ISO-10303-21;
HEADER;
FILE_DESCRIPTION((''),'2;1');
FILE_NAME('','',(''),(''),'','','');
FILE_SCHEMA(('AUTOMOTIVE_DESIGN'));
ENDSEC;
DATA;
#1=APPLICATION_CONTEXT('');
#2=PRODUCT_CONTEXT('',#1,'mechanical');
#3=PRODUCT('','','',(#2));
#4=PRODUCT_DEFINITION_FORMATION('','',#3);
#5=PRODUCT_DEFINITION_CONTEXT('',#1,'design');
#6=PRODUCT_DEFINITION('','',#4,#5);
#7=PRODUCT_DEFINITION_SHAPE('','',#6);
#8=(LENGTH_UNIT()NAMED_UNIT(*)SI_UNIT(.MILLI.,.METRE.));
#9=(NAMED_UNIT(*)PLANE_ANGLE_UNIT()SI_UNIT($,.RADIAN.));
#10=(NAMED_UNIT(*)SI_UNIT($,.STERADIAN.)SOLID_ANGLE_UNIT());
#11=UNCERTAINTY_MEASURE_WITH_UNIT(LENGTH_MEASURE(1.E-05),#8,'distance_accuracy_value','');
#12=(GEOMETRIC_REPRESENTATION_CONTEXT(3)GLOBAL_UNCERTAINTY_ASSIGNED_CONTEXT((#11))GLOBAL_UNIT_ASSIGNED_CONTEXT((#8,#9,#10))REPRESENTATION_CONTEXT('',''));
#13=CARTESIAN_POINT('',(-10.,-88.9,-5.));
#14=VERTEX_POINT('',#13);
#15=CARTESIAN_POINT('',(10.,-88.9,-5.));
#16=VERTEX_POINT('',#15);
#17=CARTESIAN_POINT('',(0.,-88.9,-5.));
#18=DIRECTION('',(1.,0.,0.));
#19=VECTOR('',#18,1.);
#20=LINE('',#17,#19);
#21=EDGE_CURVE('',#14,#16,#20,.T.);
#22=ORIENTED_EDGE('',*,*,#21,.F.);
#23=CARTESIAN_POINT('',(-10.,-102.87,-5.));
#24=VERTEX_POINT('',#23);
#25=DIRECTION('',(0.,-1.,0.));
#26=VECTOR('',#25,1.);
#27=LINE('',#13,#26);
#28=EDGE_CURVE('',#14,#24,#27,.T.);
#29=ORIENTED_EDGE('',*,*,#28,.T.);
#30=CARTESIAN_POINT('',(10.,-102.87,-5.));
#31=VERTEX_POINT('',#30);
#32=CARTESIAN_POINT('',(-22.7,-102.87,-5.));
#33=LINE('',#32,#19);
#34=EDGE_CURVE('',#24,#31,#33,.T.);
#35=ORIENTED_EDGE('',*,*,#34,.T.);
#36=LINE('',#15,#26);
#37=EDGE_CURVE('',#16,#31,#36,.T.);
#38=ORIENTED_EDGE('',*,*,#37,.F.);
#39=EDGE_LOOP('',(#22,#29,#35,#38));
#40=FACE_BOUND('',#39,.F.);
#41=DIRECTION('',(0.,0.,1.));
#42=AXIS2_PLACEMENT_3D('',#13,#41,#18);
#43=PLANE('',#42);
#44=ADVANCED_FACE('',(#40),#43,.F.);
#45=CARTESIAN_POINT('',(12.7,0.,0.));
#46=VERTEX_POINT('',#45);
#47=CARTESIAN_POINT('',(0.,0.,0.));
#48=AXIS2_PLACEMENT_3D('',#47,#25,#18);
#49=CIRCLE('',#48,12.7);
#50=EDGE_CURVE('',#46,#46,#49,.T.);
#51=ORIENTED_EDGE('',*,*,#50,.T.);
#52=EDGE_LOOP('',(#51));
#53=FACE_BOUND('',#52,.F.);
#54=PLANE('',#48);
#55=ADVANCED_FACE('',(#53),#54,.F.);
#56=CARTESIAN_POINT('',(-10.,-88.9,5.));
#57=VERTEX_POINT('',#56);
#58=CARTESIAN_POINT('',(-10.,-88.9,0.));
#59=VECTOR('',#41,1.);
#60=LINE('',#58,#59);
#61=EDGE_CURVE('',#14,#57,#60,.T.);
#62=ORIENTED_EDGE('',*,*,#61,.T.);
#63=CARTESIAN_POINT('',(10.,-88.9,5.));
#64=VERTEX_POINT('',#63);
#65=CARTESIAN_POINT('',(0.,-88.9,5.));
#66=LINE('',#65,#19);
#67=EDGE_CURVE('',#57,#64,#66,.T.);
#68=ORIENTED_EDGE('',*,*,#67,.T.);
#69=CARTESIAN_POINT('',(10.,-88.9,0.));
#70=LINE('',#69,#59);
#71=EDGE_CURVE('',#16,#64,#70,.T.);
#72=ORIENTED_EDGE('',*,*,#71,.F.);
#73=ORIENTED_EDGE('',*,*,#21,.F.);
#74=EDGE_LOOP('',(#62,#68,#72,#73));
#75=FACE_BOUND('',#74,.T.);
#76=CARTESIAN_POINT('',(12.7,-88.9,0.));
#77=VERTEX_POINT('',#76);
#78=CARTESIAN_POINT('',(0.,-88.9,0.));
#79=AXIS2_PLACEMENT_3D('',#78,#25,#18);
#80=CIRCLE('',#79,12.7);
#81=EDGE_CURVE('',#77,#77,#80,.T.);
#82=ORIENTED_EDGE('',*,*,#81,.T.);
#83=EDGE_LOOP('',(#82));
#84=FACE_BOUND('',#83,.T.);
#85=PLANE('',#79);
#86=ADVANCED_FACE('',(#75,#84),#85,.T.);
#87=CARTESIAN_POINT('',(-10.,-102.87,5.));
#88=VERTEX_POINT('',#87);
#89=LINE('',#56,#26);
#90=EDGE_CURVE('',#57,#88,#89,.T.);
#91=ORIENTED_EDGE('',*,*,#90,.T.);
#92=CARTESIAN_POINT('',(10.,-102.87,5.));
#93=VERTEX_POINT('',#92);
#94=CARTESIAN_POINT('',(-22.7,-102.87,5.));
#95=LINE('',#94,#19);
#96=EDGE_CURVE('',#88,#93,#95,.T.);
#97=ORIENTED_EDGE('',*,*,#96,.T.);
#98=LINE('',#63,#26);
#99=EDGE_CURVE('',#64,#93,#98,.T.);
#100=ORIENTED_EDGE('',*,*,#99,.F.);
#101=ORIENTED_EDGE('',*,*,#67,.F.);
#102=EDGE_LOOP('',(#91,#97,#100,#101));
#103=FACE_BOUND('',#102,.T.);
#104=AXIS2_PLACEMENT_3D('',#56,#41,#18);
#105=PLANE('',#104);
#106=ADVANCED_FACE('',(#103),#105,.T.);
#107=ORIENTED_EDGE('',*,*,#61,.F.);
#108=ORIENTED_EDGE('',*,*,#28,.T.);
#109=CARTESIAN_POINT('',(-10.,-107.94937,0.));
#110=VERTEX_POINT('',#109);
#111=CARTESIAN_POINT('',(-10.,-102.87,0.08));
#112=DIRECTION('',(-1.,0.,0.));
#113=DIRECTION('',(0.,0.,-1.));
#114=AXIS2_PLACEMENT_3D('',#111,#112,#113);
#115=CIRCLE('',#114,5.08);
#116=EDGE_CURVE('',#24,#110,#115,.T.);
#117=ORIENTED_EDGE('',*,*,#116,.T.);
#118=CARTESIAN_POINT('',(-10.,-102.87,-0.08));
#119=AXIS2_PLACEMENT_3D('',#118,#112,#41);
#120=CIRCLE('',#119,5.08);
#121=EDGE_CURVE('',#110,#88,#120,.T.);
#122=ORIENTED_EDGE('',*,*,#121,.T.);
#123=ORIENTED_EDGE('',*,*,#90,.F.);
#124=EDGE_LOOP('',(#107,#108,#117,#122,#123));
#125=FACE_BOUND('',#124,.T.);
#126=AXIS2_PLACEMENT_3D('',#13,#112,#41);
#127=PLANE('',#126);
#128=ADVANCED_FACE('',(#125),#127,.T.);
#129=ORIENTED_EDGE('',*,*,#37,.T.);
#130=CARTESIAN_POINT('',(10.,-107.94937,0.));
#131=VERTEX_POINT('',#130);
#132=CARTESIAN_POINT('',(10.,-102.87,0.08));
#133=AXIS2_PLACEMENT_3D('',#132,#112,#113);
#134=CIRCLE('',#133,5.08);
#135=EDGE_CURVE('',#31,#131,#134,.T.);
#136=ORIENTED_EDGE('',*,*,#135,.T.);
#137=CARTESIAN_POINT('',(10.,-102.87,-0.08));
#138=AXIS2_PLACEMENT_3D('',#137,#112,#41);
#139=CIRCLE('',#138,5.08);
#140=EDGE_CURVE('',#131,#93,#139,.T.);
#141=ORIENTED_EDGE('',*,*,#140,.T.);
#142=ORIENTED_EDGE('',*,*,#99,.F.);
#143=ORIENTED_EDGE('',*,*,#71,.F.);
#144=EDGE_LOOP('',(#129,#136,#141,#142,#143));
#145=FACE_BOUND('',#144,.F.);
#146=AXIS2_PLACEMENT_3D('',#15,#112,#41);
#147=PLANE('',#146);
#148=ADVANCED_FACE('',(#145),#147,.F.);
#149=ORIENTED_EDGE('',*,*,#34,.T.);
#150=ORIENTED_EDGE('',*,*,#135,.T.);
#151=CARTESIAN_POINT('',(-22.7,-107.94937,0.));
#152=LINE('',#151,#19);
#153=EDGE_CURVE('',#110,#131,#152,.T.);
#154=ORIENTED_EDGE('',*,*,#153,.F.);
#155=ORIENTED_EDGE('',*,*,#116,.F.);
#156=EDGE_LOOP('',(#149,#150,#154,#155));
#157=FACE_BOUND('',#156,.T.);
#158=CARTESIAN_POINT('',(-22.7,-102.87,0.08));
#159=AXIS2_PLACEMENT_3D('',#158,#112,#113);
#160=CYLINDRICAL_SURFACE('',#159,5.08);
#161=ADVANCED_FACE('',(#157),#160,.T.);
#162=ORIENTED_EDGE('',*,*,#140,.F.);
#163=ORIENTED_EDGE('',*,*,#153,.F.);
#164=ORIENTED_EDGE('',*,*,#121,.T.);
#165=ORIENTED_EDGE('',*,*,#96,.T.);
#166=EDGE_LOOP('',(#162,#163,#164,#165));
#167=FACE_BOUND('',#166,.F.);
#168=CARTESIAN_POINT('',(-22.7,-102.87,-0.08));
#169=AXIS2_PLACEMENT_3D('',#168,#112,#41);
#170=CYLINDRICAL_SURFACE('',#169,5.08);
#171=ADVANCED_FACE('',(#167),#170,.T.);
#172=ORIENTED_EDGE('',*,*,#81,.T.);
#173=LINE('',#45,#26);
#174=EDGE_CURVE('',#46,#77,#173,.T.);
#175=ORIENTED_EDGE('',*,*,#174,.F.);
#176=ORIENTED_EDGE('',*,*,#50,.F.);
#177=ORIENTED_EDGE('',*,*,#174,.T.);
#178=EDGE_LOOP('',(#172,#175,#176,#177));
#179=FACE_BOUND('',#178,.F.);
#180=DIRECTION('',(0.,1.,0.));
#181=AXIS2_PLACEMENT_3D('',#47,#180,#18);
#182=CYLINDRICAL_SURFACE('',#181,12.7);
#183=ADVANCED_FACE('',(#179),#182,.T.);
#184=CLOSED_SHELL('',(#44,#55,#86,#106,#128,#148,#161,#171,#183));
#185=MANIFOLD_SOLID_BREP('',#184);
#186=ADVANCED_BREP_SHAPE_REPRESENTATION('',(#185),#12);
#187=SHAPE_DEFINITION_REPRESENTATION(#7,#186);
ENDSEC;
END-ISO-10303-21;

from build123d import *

# Parameters (mm, degrees)
F0_R        = 12.7
F1_DEPTH    = 88.9
F2_W        = 20
F2_H        = 10
F3_DEPTH    = 19.05
F4_T1_DEPTH = 45.4


# Not quite as in the source:
# - a fillet or chamfer that OpenCascade refuses, or shapes differently, is made with other operations: its cross-section is extruded or revolved along the edge and cut away or added


with BuildPart() as f1:
    # F0 (on Front) → F1 (new body)
    with BuildSketch(Plane.XZ):
        Circle(F0_R)
    extrude(amount=F1_DEPTH)

    # F2 (on face) → F3 (join)
    with BuildSketch(Plane.XZ.offset(88.9)):
        Rectangle(F2_W, F2_H)
    extrude(amount=F3_DEPTH)

    # F4: fillet of radius 5.08 on 2 edges, made by hand

    # F4_s2 → F4_t1 (cut)
    with BuildSketch(Plane.YZ.offset(-22.7)):
        with BuildLine():
            ThreePointArc((-102.87, 5), (-106.4621024484, 3.5121024484), (-107.95, -0.08))
            Line((-107.95, -0.08), (-107.95, 5))
            Line((-107.95, 5), (-102.87, 5))
        make_face()
        with BuildLine():
            ThreePointArc((-102.87, -5), (-106.4621024484, -3.5121024484), (-107.95, 0.08))
            Line((-107.95, 0.08), (-107.95, -5))
            Line((-107.95, -5), (-102.87, -5))
        make_face()
    extrude(amount=F4_T1_DEPTH, mode=Mode.SUBTRACT)


solid = f1.part
